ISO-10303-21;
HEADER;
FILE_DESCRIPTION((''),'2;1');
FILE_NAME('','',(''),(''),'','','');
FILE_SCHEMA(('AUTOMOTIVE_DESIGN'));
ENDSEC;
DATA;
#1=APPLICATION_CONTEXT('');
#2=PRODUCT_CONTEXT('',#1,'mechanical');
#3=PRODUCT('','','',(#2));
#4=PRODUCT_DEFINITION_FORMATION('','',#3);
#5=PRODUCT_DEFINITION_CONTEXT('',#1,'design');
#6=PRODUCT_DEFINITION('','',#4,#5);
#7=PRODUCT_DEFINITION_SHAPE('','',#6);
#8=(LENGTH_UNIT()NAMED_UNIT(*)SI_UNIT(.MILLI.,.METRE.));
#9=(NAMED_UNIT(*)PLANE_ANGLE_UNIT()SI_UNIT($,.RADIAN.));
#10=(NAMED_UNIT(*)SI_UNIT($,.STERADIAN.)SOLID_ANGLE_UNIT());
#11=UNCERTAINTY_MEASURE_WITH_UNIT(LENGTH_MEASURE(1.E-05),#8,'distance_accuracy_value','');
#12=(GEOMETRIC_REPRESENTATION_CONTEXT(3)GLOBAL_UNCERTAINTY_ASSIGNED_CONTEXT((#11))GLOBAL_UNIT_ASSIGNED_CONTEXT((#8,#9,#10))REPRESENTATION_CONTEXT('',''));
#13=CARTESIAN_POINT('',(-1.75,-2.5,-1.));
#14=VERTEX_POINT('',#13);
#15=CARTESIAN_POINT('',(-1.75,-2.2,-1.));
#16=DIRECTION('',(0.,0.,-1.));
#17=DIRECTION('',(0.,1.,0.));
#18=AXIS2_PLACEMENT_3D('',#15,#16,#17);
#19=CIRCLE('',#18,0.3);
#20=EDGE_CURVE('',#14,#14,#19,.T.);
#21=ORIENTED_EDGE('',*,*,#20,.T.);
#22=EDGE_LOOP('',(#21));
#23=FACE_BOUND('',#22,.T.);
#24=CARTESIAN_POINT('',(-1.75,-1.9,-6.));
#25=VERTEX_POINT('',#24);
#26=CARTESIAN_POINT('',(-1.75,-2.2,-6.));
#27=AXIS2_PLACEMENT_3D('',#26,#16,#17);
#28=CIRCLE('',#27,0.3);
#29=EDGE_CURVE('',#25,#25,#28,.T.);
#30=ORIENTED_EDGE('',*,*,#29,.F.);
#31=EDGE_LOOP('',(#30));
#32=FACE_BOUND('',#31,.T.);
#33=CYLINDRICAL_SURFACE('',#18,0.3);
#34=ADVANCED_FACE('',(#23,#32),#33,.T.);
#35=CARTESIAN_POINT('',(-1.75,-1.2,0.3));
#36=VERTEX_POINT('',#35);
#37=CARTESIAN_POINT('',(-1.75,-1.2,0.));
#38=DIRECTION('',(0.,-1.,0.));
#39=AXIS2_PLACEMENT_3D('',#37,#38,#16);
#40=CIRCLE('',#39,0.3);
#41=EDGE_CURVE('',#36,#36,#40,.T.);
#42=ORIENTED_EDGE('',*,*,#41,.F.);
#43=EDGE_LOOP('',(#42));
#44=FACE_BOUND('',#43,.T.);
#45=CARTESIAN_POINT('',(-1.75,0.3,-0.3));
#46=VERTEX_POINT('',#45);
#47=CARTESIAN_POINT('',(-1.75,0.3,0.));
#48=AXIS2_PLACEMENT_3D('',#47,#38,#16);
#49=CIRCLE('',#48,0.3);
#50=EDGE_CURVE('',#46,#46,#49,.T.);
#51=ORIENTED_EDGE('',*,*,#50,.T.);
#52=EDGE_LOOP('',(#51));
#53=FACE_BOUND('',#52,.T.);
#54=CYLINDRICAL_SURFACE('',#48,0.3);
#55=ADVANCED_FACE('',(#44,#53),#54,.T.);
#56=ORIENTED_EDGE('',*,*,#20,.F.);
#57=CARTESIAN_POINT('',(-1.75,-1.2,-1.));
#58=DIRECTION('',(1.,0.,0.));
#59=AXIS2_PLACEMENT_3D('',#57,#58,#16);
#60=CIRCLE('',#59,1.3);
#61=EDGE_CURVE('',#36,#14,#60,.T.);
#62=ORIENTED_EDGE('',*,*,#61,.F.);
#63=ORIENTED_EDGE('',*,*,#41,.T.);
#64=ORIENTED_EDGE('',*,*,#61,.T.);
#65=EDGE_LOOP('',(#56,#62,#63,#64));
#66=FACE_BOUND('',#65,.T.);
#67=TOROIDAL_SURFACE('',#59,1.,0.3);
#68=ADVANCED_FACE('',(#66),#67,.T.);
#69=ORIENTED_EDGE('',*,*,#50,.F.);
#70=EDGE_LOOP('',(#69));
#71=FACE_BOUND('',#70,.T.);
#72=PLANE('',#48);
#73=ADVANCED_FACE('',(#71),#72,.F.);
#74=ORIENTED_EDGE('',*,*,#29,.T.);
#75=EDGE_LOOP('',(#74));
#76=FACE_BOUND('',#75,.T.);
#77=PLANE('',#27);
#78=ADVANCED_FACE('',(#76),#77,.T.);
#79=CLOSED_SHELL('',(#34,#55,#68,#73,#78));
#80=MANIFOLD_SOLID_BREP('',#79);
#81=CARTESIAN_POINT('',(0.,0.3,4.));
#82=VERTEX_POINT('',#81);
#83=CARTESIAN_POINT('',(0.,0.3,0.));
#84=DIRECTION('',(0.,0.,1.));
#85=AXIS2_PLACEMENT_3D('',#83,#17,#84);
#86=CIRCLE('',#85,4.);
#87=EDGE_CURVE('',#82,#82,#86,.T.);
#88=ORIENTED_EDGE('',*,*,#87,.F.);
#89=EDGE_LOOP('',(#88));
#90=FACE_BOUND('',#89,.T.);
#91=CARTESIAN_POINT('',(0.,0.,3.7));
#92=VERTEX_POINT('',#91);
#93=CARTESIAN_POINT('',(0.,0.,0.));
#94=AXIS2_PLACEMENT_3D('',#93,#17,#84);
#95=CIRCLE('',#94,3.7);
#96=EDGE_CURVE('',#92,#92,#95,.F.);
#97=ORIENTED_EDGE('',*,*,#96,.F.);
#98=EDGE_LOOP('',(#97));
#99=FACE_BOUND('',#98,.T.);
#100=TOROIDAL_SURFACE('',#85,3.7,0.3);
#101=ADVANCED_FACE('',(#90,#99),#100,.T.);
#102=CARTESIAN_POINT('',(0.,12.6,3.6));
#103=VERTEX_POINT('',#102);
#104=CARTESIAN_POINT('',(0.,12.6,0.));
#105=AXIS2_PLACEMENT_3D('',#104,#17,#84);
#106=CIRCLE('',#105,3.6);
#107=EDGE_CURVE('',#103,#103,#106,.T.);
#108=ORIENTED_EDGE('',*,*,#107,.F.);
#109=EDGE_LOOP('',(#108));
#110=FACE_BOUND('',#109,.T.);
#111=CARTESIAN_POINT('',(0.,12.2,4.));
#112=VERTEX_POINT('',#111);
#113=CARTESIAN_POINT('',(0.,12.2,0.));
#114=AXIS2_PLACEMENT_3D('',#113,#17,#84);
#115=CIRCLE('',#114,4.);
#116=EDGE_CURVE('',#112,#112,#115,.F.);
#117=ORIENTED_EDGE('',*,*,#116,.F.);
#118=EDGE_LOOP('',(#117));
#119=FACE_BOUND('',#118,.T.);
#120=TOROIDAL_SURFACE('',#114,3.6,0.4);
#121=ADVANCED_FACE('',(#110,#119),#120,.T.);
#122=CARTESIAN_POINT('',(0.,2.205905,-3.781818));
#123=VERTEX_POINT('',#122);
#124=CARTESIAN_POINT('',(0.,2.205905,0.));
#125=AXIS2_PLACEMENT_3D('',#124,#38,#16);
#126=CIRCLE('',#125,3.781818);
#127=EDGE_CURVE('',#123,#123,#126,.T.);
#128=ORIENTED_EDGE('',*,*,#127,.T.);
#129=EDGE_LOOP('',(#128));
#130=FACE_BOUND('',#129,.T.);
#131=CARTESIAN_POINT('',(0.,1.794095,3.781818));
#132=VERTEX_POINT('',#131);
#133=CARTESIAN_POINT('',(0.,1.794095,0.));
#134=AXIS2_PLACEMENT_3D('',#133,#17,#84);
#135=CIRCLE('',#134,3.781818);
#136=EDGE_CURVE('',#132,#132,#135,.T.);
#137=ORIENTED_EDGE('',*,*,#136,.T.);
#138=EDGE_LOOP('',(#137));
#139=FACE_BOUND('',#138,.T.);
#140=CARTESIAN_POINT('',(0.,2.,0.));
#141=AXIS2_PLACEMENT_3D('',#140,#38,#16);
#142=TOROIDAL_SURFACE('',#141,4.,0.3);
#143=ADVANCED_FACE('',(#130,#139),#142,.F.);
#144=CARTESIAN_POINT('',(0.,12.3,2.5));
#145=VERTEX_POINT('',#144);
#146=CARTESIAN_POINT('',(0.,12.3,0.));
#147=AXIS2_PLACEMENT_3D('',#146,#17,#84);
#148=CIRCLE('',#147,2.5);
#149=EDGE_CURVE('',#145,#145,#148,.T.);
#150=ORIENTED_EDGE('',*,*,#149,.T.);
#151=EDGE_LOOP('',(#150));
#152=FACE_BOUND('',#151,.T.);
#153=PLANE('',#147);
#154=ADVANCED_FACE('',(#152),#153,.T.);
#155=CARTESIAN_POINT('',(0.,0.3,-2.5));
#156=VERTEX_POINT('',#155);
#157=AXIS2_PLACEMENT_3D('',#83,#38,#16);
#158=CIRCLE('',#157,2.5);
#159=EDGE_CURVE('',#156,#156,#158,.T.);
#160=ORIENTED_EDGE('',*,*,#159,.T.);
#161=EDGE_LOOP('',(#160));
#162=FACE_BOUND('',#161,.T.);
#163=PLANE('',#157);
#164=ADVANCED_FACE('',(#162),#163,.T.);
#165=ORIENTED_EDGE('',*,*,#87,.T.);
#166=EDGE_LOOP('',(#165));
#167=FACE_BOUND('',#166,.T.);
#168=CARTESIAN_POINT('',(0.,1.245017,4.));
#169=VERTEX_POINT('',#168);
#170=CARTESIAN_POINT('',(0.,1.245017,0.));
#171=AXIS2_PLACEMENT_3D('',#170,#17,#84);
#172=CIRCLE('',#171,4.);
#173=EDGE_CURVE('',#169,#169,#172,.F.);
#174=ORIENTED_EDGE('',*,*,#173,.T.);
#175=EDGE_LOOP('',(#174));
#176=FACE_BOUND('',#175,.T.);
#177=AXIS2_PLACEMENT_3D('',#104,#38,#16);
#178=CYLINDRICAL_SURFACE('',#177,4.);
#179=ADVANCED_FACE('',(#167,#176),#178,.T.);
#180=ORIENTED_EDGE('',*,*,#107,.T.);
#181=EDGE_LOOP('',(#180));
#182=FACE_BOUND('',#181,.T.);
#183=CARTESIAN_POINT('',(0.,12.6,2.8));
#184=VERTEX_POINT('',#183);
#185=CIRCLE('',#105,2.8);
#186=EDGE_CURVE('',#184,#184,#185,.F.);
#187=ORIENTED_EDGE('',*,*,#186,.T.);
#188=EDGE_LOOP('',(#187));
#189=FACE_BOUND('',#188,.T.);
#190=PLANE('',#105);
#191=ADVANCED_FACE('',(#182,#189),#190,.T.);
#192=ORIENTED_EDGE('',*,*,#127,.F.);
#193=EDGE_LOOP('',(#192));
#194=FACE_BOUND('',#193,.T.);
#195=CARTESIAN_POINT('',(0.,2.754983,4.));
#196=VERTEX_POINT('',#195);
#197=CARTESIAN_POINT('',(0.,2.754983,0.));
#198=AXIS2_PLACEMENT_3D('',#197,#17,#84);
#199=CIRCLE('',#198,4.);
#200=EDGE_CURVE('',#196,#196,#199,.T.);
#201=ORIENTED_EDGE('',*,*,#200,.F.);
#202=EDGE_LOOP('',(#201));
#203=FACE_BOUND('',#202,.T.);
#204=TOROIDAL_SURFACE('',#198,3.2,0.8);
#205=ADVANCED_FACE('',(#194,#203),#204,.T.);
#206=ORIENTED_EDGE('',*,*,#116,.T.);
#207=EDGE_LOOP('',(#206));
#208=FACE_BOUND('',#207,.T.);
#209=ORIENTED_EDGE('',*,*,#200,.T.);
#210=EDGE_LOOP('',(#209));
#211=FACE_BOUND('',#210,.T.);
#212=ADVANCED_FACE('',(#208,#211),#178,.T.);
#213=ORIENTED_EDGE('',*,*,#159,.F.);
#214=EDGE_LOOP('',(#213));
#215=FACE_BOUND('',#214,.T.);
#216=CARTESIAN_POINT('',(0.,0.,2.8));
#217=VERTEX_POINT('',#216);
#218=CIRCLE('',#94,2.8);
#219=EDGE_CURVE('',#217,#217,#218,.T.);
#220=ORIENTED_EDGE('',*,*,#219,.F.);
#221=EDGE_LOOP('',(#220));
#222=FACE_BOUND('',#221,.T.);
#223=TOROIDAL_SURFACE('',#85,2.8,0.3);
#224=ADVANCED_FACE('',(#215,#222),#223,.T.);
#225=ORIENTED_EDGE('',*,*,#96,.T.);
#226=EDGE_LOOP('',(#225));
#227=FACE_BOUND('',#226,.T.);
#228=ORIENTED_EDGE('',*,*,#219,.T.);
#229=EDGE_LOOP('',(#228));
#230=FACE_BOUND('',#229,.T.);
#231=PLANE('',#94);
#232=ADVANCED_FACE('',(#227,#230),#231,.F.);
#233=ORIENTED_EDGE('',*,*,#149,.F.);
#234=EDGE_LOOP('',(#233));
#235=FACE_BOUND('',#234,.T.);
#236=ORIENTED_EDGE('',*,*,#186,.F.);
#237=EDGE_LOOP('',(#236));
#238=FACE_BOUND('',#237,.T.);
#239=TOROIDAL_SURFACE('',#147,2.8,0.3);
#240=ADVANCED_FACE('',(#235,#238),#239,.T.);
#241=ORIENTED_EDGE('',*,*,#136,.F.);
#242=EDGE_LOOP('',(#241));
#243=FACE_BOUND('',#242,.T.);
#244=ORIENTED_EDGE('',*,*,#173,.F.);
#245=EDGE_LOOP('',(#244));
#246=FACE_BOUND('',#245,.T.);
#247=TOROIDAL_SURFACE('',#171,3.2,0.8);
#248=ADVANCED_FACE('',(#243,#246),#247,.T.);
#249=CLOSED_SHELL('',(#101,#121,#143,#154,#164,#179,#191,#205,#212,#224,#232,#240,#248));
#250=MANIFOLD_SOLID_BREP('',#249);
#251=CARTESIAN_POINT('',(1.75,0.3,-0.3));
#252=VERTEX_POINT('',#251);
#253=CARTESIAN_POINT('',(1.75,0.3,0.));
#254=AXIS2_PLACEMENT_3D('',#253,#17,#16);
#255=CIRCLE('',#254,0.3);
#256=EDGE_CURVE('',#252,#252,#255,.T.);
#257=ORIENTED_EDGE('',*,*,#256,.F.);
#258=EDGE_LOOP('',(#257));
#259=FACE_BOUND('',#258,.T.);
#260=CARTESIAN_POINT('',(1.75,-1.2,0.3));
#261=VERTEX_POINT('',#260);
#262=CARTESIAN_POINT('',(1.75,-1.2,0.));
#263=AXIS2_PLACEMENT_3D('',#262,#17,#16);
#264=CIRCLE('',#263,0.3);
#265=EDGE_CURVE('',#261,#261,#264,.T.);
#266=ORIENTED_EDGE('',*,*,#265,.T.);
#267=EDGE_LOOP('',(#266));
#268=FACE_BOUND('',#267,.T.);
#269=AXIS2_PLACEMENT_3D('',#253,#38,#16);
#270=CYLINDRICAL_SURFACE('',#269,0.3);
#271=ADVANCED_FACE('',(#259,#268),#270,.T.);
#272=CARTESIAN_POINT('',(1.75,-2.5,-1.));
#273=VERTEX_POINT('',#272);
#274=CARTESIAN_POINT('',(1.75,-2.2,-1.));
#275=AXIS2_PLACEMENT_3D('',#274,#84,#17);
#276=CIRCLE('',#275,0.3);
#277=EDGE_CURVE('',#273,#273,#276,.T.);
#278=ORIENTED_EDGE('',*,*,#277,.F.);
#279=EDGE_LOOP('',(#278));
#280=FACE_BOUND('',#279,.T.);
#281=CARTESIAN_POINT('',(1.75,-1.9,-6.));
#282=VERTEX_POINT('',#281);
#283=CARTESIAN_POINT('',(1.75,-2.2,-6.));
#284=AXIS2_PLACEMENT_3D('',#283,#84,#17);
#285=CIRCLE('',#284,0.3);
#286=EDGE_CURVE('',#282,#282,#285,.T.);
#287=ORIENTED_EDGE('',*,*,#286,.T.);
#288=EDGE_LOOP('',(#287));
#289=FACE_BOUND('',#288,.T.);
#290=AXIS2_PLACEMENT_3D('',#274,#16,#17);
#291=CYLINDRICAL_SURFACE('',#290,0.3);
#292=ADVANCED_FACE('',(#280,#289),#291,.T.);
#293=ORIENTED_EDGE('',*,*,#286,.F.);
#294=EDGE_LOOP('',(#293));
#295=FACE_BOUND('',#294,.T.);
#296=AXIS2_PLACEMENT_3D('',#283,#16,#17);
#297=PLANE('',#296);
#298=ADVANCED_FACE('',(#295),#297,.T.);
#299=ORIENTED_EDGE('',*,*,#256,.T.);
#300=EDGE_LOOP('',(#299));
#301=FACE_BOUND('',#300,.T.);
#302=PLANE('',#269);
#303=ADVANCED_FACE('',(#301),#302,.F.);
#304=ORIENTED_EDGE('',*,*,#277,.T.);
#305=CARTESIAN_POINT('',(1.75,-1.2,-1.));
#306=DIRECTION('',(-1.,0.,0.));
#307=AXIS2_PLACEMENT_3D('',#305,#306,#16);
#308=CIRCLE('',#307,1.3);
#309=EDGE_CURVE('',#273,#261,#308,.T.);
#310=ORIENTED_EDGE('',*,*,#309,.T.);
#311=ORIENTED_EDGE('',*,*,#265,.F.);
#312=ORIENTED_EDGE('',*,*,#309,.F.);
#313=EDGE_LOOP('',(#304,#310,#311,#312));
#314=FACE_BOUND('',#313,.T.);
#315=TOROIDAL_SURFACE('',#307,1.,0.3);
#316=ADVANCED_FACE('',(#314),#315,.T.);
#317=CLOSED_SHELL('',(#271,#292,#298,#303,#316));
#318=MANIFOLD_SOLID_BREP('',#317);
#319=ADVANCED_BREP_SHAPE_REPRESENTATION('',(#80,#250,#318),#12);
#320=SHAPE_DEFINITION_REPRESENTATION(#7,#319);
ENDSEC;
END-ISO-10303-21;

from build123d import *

# Parameters (mm, degrees)
SKETCH_2_R          = 4
EXTRUDE_1_DEPTH     = 12.6
SKETCH_3_R          = 2.5
CUT_EXTRUDE_1_DEPTH = 0.3
SKETCH_4_R          = 0.3
CUT_EXTRUDE_START   = -0.3
SKETCH_7_R          = 2.5
CUT_EXTRUDE_2_DEPTH = 0.3
FILLET_1_R          = 0.3
FILLET_2_R          = 0.8
FILLET_3_R          = 0.4
FILLET_4_R          = 0.3
FILLET_5_R          = 0.3


with BuildPart() as part:
    # Эскиз2 → Бобышка-Вытянуть1 (new body)
    with BuildSketch(Plane(origin=(0, 0, 0), x_dir=(1, 0, 0), z_dir=(0, 1, 0))):
        with Locations(Location((0, 0, 0), (0, 0, 270))):
            Circle(SKETCH_2_R)
    extrude(amount=EXTRUDE_1_DEPTH)

    # Эскиз3 → Вырез-Вытянуть1 (cut)
    with BuildSketch(Plane.XZ):
        with Locations(Location((0, 0, 0), (0, 0, 270))):
            Circle(SKETCH_3_R)
    extrude(amount=-CUT_EXTRUDE_1_DEPTH, mode=Mode.SUBTRACT)

    # Эскиз7 → Вырез-Вытянуть2 (cut)
    with BuildSketch(Plane(origin=(0, 12.6, 0), x_dir=(1, 0, 0), z_dir=(0, 1, 0)).offset(CUT_EXTRUDE_START)):
        with Locations(Location((0, 0, 0), (0, 0, 90))):
            Circle(SKETCH_7_R)
    extrude(amount=CUT_EXTRUDE_2_DEPTH, mode=Mode.SUBTRACT)

    # Эскиз9 → Вырез-Повернуть1 (revolve, cut)
    with BuildSketch(Plane(origin=(0, 0, 0), x_dir=(0, 0, -1), z_dir=(1, 0, 0)), mode=Mode.PRIVATE) as cut_revolve_1_sk:
        with BuildLine():
            Line((-4, 2.3), (-4, 1.7))
            ThreePointArc((-4, 1.7), (-3.7, 2), (-4, 2.3))
        make_face()
    revolve(cut_revolve_1_sk.sketch.rotate(Axis((0, -2.369211138, 0), (0, 1, 0)), 180), axis=Axis((0, -2.369211138, 0), (0, 1, 0)), mode=Mode.SUBTRACT)

    # Скругление1
    fillet_1_edges = [part.edges().sort_by_distance(p)[0] for p in [
        (0, 0, 2.5),
    ]]
    fillet(fillet_1_edges, radius=FILLET_1_R - 0.0001)  # a hair under: the kernel refuses the full size

    # Скругление2
    fillet_2_edges = [part.edges().sort_by_distance(p)[0] for p in [
        (-4, 1.7, 0),
        (-4, 2.3, 0),
    ]]
    fillet(fillet_2_edges, radius=FILLET_2_R)

    # Скругление3
    fillet_3_edges = [part.edges().sort_by_distance(p)[0] for p in [
        (0, 12.6, -4),
    ]]
    fillet(fillet_3_edges, radius=FILLET_3_R)

    # Скругление4
    fillet_4_edges = [part.edges().sort_by_distance(p)[0] for p in [
        (0, 12.6, 2.5),
    ]]
    fillet(fillet_4_edges, radius=FILLET_4_R - 0.0001)  # a hair under: the kernel refuses the full size

    # Скругление5
    fillet_5_edges = [part.edges().sort_by_distance(p)[0] for p in [
        (0, 0, -4),
    ]]
    fillet(fillet_5_edges, radius=FILLET_5_R)


with BuildPart() as body_2:
    # По траектории1: sweep along a path in Эскиз6
    with BuildLine(Plane.ZY.offset(1.75)) as sweep_1_path:
        Line((0, 0.3), (0, -1.2))
        ThreePointArc((0, -1.2), (-0.292893219, -1.907106781), (-1, -2.2))
        Line((-1, -2.2), (-6, -2.2))
    # Эскиз4 → По траектории1 (sweep)
    with BuildSketch(Plane.XZ.offset(-0.3)):
        with Locations((-1.75, 0)):
            Circle(SKETCH_4_R)
    sweep(path=sweep_1_path.line)


with BuildPart() as body_3:
    # Зеркальное отражение1: mirrored copy
    add(body_2.part.mirror(Plane(origin=(0, 0, 0), x_dir=(0, 0, 1), z_dir=(1, 0, 0))))


solid = Compound([part.part, body_2.part, body_3.part])
